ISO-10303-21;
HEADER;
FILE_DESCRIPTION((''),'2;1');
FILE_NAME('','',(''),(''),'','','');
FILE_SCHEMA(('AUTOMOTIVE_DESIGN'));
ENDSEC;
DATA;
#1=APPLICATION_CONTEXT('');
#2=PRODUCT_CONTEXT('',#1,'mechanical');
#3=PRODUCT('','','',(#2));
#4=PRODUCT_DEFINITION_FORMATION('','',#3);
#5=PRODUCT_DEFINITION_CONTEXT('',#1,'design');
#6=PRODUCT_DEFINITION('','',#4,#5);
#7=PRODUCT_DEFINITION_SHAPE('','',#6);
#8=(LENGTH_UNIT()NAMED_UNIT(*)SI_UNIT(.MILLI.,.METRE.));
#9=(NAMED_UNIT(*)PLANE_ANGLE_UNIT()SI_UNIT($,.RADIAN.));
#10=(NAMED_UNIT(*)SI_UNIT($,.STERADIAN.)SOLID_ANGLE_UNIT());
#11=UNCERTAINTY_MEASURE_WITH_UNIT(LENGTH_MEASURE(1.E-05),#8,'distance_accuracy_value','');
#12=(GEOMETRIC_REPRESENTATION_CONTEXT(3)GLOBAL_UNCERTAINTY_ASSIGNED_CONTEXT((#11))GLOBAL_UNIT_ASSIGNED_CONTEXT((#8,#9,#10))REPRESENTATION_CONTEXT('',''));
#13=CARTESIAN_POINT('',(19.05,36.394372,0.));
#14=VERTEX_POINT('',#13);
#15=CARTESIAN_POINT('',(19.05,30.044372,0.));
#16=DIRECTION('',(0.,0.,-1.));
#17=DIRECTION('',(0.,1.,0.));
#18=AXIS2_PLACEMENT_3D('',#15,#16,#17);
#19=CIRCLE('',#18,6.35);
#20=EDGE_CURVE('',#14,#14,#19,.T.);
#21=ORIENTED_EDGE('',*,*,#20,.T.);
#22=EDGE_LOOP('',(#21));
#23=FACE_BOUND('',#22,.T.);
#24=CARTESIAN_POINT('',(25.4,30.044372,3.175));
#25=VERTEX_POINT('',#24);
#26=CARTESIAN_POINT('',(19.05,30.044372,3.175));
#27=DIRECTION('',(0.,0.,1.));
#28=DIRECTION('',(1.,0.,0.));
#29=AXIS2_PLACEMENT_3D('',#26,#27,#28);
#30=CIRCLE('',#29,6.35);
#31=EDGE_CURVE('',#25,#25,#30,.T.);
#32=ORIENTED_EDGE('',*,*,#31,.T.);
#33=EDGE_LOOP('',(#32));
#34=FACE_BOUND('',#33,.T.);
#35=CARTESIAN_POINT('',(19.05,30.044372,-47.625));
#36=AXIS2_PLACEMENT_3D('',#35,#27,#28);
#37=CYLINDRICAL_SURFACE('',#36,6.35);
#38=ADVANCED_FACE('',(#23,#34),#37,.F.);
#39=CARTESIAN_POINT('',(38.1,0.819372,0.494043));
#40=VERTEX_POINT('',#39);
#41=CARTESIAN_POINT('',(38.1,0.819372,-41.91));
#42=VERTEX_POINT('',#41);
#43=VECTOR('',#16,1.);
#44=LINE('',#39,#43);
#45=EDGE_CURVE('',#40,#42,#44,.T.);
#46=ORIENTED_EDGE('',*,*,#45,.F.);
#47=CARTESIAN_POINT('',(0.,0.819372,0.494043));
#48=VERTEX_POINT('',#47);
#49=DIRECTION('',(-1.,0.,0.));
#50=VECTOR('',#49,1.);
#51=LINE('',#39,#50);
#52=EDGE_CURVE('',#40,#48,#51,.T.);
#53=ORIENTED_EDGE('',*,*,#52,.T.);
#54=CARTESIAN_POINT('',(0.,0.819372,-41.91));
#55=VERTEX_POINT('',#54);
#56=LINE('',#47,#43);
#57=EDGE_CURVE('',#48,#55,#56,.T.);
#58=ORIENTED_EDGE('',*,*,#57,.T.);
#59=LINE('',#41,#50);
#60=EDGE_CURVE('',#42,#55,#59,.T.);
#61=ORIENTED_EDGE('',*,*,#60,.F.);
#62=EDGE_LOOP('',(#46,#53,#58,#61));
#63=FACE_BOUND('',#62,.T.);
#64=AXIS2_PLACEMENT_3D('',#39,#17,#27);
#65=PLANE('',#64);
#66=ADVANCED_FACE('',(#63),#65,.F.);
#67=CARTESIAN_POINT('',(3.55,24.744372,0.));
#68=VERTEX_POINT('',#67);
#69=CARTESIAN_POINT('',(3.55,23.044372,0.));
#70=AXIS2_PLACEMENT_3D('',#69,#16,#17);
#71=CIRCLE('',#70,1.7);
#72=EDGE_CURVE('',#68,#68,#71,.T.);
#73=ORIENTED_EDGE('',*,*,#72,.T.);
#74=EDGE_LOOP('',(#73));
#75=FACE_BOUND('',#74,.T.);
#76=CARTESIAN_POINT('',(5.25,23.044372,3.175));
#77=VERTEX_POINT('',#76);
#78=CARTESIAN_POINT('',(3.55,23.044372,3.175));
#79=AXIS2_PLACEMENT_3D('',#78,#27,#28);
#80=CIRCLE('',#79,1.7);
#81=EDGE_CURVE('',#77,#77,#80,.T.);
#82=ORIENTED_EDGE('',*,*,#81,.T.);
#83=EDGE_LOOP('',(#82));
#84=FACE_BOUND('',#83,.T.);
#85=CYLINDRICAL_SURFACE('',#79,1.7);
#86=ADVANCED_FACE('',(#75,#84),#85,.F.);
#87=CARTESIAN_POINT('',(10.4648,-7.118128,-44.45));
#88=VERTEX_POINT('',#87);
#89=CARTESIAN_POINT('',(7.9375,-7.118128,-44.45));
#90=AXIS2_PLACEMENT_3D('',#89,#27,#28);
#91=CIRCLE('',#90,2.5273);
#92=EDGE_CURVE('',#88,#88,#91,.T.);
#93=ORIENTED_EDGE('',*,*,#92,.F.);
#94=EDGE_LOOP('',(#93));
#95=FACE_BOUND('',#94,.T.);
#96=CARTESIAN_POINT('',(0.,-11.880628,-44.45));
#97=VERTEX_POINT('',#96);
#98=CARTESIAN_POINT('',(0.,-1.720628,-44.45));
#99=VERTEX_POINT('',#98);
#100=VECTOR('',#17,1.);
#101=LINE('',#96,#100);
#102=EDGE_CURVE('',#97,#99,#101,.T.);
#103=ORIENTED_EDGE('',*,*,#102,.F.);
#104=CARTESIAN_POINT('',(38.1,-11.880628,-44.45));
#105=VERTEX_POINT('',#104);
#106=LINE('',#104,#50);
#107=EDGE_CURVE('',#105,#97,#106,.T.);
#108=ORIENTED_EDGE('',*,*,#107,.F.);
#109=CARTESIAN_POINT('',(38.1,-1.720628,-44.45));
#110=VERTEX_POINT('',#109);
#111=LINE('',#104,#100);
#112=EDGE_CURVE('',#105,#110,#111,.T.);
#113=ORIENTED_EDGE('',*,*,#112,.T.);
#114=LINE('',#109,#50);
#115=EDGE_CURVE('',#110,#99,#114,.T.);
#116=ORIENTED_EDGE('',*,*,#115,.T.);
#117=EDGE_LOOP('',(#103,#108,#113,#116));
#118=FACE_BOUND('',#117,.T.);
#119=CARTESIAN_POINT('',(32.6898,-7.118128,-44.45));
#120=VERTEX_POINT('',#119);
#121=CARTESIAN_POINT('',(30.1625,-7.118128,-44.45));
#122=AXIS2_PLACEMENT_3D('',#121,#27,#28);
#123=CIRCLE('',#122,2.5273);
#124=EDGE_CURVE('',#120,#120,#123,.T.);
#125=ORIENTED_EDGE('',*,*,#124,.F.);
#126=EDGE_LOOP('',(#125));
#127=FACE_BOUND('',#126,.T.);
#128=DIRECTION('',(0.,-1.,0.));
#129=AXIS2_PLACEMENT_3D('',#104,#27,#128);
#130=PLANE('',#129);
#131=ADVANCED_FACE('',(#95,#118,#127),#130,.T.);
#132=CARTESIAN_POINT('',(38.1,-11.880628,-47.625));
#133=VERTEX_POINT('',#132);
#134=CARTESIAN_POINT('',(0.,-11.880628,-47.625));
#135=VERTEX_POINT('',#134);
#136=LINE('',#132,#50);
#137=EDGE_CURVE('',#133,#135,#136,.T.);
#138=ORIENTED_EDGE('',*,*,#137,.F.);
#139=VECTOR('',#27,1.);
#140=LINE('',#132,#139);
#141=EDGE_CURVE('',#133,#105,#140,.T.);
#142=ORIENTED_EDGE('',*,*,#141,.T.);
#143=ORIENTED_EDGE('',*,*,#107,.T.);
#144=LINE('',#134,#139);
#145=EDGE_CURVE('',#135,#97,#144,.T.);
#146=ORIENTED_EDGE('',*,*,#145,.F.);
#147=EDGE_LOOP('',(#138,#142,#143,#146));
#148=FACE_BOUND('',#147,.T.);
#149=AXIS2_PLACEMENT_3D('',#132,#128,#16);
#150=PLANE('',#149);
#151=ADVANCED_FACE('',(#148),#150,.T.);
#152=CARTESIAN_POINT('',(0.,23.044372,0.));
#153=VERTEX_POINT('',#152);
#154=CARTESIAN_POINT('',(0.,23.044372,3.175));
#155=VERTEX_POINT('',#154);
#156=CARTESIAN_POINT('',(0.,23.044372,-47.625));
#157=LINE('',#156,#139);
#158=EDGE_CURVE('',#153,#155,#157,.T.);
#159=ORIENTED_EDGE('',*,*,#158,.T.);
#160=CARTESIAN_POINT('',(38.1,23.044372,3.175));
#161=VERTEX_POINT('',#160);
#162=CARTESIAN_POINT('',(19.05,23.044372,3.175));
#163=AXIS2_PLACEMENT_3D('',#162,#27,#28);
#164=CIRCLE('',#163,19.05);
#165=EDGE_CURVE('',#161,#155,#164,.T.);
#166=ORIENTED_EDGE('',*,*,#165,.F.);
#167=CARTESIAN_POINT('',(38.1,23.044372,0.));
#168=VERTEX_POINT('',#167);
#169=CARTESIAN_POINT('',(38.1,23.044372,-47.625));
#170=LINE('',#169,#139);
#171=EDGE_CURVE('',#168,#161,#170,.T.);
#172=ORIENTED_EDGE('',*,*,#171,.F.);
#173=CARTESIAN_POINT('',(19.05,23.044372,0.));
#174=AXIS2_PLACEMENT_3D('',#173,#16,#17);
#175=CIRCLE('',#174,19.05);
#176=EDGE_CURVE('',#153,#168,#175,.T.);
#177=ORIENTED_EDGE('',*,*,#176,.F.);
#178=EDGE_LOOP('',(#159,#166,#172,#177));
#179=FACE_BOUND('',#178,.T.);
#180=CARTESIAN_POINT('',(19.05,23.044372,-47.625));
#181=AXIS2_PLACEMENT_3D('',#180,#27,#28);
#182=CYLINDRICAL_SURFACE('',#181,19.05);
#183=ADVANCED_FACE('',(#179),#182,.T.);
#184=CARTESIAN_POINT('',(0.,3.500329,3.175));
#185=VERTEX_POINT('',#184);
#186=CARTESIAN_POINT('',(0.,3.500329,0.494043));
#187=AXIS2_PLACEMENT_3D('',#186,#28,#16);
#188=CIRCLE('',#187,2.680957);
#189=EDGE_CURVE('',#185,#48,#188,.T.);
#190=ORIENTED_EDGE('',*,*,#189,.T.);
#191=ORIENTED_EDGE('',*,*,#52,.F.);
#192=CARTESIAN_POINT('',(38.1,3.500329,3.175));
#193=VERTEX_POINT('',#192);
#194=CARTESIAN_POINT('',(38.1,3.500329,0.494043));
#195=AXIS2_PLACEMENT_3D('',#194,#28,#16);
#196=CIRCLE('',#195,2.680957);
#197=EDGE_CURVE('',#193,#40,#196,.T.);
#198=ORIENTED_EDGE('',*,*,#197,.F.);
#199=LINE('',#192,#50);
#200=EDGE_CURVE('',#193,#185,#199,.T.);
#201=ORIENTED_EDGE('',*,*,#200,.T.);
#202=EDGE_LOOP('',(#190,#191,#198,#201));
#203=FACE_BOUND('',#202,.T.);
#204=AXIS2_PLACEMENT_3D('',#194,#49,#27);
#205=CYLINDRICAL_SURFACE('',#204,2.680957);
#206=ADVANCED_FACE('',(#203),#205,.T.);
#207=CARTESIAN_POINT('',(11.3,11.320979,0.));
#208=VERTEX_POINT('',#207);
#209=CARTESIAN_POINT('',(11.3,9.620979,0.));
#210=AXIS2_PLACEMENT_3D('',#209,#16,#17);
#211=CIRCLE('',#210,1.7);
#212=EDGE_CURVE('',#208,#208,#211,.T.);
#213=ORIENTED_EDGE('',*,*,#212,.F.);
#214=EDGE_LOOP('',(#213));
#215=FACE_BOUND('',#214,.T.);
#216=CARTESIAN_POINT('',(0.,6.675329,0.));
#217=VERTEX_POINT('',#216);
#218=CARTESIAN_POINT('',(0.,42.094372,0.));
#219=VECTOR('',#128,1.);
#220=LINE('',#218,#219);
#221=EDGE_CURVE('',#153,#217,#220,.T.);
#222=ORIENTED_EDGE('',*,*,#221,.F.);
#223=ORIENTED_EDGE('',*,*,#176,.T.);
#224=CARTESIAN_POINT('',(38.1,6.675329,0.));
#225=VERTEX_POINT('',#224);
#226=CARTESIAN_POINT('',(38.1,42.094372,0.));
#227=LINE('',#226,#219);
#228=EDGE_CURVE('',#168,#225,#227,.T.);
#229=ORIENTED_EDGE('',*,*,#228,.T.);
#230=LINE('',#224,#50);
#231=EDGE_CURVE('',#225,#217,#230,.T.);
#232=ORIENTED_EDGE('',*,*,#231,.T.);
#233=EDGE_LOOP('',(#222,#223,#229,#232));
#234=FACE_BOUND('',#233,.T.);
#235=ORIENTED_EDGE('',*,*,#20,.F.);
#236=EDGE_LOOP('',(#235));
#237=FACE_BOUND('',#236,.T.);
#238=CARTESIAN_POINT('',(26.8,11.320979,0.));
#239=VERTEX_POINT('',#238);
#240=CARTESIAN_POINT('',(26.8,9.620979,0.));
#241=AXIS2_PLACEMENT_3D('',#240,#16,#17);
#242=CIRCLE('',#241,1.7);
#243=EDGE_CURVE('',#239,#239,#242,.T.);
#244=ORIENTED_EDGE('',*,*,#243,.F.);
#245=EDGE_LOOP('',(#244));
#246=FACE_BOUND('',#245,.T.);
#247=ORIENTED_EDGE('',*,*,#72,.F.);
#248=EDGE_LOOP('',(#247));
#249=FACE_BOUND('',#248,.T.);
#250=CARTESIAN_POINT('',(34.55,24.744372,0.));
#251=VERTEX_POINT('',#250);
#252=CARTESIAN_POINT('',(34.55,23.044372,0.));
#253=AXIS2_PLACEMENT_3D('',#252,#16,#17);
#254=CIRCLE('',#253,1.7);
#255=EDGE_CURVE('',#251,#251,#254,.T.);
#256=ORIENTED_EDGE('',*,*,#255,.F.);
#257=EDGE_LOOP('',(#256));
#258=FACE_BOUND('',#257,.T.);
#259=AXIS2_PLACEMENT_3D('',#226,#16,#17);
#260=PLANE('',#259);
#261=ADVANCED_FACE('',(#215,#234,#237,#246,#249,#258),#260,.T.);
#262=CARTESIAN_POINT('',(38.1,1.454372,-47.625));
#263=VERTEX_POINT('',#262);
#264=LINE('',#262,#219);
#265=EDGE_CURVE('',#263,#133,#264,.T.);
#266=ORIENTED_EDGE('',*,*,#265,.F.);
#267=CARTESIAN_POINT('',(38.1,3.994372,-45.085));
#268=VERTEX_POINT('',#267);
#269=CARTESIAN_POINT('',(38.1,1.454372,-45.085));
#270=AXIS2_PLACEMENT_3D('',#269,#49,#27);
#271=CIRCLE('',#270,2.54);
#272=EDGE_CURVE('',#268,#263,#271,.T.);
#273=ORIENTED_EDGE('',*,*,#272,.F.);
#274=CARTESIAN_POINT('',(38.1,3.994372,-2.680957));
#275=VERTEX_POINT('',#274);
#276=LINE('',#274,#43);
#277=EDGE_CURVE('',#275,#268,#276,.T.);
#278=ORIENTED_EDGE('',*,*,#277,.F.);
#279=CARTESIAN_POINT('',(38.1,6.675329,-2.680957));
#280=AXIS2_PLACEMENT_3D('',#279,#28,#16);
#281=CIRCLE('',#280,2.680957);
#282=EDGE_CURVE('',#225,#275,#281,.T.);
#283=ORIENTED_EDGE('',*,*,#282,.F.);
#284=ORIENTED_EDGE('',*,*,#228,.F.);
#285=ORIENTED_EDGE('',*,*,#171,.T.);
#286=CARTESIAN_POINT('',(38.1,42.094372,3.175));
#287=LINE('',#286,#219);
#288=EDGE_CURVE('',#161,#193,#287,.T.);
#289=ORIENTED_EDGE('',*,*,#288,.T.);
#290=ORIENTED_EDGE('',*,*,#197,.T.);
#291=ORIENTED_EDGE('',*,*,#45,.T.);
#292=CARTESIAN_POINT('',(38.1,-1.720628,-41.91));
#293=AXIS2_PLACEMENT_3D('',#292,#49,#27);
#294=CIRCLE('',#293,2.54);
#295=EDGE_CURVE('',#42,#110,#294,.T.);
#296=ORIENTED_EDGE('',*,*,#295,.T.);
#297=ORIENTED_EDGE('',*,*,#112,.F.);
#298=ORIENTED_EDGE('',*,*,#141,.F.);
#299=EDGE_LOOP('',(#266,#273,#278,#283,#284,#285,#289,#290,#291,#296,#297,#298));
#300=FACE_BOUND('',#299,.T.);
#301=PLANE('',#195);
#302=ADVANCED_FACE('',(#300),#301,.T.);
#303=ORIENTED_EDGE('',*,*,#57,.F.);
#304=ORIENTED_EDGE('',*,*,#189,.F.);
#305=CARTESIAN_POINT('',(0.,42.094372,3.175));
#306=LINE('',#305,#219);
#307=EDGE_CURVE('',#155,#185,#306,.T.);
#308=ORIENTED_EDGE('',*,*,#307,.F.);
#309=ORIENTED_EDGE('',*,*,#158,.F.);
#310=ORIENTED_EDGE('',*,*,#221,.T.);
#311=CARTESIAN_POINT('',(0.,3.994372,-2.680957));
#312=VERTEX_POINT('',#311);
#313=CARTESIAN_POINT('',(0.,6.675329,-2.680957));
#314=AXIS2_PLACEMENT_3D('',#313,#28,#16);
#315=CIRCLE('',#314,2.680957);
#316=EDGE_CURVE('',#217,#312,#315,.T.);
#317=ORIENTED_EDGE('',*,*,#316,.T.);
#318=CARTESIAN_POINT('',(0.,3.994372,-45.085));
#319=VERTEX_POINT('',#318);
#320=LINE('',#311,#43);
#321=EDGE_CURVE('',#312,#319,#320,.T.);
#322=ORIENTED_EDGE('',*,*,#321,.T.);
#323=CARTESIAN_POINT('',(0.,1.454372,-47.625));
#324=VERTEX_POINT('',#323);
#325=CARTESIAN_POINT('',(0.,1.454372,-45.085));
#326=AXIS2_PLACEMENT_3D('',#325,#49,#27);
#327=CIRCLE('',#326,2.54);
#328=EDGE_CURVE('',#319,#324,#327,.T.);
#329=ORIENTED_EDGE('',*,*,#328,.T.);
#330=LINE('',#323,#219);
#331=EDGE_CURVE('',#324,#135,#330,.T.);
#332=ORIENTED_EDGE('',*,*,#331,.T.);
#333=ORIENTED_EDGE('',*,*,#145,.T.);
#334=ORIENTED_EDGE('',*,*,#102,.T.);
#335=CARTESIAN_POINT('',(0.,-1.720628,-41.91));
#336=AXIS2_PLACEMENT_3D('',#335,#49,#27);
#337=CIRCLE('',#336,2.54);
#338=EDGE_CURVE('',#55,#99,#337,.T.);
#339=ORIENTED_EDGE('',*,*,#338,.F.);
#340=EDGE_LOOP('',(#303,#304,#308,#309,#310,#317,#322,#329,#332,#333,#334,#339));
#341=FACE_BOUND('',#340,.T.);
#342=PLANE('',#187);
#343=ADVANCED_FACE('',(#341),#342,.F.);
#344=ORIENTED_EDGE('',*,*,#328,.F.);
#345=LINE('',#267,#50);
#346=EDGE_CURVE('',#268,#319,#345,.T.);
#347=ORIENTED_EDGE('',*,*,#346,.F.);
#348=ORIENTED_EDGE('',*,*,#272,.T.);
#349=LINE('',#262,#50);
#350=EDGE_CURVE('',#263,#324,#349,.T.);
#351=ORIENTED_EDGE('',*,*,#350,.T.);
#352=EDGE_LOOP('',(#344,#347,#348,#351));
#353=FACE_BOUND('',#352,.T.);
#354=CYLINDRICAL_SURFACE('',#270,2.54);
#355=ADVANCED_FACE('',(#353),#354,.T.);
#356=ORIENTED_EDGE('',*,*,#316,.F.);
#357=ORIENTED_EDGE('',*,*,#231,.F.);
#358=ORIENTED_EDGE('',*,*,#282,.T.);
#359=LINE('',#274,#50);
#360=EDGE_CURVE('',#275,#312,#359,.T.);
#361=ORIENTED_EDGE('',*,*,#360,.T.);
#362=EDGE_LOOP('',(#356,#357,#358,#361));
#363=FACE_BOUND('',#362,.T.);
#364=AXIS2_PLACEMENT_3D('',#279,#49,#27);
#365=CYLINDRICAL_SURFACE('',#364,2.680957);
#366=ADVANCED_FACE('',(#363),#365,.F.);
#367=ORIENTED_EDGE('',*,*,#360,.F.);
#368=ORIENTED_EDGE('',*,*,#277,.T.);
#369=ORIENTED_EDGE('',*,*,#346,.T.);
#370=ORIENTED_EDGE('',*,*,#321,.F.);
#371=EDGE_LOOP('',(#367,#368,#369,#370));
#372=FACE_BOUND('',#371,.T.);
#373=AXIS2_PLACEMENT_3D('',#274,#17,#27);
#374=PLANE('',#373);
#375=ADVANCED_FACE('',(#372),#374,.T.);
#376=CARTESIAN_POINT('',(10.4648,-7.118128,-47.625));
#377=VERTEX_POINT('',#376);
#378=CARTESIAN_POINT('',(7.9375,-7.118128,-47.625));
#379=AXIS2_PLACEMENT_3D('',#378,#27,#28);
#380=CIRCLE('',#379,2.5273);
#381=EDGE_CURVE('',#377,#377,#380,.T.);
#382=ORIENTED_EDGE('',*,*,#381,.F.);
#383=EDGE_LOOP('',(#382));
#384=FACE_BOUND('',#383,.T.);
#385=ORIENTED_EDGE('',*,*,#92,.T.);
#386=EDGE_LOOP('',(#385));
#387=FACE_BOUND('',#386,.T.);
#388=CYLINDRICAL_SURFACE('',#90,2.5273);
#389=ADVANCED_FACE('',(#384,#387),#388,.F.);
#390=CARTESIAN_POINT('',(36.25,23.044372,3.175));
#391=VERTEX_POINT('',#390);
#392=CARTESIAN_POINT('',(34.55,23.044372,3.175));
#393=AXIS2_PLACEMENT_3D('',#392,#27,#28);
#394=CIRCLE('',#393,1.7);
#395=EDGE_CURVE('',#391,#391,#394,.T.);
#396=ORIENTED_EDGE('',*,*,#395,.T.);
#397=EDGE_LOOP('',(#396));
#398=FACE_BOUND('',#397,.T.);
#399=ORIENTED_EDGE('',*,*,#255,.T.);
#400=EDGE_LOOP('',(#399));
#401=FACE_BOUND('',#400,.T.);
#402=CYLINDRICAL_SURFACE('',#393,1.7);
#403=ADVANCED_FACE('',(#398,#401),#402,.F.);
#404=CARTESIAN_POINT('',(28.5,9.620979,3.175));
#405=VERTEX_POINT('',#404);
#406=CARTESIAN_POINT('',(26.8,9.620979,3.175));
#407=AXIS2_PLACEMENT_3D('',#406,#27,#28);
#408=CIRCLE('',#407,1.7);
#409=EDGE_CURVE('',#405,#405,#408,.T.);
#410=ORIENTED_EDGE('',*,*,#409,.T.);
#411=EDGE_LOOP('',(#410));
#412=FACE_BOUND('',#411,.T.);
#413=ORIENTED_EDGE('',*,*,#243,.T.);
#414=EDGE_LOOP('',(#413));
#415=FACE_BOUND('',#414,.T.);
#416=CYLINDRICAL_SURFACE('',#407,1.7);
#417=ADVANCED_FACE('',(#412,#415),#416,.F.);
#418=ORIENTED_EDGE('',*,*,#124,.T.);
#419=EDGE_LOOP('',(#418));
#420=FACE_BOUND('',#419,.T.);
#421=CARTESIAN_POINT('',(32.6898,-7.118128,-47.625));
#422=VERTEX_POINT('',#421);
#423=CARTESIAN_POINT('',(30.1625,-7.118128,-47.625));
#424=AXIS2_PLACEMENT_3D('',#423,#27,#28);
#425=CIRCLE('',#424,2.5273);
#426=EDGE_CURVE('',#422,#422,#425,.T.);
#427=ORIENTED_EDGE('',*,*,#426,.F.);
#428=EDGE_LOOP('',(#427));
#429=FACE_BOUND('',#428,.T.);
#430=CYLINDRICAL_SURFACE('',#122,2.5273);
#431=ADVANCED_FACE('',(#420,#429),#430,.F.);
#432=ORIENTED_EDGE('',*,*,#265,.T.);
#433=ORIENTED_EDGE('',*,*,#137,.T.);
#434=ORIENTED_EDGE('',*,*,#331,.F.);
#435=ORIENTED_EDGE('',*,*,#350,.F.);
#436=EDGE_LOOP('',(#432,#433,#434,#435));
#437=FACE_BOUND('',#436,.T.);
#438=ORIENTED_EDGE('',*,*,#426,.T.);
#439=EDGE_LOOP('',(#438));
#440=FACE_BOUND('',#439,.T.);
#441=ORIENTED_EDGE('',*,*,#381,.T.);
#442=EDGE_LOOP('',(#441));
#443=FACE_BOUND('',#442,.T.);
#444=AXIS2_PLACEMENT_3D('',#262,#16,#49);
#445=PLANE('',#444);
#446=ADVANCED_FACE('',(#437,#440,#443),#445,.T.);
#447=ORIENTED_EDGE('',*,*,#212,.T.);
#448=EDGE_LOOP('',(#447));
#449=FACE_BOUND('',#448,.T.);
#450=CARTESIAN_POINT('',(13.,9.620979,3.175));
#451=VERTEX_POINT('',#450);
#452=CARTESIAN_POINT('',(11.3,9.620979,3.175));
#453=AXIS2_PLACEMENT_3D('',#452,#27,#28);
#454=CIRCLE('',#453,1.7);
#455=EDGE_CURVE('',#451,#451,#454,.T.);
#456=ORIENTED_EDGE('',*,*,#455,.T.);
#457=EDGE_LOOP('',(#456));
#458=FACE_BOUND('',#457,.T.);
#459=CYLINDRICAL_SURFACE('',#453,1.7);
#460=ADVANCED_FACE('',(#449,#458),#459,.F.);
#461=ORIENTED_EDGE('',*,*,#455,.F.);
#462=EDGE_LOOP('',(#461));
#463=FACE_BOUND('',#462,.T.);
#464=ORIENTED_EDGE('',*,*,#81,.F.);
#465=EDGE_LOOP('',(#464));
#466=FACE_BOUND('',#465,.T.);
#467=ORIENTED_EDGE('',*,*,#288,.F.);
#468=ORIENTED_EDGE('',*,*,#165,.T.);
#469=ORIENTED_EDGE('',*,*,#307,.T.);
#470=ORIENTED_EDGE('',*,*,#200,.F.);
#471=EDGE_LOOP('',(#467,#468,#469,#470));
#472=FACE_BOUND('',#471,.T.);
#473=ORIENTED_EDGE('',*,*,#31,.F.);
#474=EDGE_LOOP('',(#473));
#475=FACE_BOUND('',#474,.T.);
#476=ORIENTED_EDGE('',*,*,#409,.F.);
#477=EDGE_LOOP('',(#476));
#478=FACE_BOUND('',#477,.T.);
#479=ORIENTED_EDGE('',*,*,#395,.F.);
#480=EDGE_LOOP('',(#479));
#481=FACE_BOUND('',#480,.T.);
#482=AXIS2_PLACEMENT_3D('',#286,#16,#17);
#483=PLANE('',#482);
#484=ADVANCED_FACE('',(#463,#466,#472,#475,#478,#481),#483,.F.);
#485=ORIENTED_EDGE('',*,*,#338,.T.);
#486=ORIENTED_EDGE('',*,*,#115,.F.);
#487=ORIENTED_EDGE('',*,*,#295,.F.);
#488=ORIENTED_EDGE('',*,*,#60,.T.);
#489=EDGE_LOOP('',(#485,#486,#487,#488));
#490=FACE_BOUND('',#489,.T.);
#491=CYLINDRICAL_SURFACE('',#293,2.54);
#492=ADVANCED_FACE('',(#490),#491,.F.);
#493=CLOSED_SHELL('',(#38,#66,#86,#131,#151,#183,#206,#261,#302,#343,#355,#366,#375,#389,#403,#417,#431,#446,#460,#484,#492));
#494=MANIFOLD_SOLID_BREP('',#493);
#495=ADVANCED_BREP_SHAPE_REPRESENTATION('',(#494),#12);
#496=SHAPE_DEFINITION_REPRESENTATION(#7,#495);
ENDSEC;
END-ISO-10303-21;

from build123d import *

# Parameters (mm, degrees)
BOSS_EXTRUDE1_DEPTH        = 38.1
F_8_0_199_DIAMETER_HOLE1_D = 5.0546
SKETCH11_R                 = 6.350000009
CUT_EXTRUDE1_DEPTH         = 77.185209693
M3_CLEARANCE_HOLE1_D       = 3.4


with BuildPart() as part:
    # Sketch1 → Boss-Extrude1 (new body)
    with BuildSketch(Plane(origin=(0, 0, 0), x_dir=(0, 0, -1), z_dir=(1, 0, 0))):
        with BuildLine():
            Line((0, 42.094372261), (0, 6.675328802))
            ThreePointArc((0, 6.675328802), (0.785233991, 4.779606252), (2.680956542, 3.994372261))
            Line((2.680956542, 3.994372261), (45.085, 3.994372261))
            ThreePointArc((45.085, 3.994372261), (46.881051224, 3.250423485), (47.625, 1.454372261))
            Line((47.625, 1.454372261), (47.625, -11.880627739))
            Line((47.625, -11.880627739), (44.45, -11.880627739))
            Line((44.45, -11.880627739), (44.45, -1.720627739))
            ThreePointArc((44.45, -1.720627739), (43.706051224, 0.075423485), (41.91, 0.819372261))
            Line((41.91, 0.819372261), (-0.494043458, 0.819372261))
            ThreePointArc((-0.494043458, 0.819372261), (-2.389766009, 1.604606252), (-3.175, 3.500328802))
            Line((-3.175, 3.500328802), (-3.175, 42.094372261))
            Line((-3.175, 42.094372261), (0, 42.094372261))
        make_face()
    extrude(amount=BOSS_EXTRUDE1_DEPTH)

    # #8 (0.199) Diameter Hole1 (through all)
    with Locations(Plane.XY.offset(-44.45)):
        with Locations((7.9375, -7.118127739), (30.1625, -7.118127739)):
            Hole(F_8_0_199_DIAMETER_HOLE1_D / 2)

    # Sketch11 → Cut-Extrude1 (cut, through all)
    with BuildSketch(Plane.XY.offset(3.175)):
        with BuildLine():
            Line((38.1, 42.094372261), (19.05, 42.094372261))
            ThreePointArc((19.05, 42.094372261), (32.520384182, 36.514756442), (38.1, 23.044372261))
            Line((38.1, 23.044372261), (38.1, 42.094372261))
        make_face()
        with BuildLine():
            Line((0, 42.094372261), (0, 23.044372261))
            ThreePointArc((0, 23.044372261), (5.579615818, 36.514756442), (19.05, 42.094372261))
            Line((19.05, 42.094372261), (0, 42.094372261))
        make_face()
        with Locations((19.05, 30.044372231)):
            Circle(SKETCH11_R)
    extrude(amount=-CUT_EXTRUDE1_DEPTH, mode=Mode.SUBTRACT)

    # M3 Clearance Hole1 (through all)
    with Locations(Plane.XY.offset(3.175)):
        with Locations((3.55, 23.044372261), (34.55, 23.044372261), (26.8, 9.620978502), (11.3, 9.620978502)):
            Hole(M3_CLEARANCE_HOLE1_D / 2)


solid = part.part
